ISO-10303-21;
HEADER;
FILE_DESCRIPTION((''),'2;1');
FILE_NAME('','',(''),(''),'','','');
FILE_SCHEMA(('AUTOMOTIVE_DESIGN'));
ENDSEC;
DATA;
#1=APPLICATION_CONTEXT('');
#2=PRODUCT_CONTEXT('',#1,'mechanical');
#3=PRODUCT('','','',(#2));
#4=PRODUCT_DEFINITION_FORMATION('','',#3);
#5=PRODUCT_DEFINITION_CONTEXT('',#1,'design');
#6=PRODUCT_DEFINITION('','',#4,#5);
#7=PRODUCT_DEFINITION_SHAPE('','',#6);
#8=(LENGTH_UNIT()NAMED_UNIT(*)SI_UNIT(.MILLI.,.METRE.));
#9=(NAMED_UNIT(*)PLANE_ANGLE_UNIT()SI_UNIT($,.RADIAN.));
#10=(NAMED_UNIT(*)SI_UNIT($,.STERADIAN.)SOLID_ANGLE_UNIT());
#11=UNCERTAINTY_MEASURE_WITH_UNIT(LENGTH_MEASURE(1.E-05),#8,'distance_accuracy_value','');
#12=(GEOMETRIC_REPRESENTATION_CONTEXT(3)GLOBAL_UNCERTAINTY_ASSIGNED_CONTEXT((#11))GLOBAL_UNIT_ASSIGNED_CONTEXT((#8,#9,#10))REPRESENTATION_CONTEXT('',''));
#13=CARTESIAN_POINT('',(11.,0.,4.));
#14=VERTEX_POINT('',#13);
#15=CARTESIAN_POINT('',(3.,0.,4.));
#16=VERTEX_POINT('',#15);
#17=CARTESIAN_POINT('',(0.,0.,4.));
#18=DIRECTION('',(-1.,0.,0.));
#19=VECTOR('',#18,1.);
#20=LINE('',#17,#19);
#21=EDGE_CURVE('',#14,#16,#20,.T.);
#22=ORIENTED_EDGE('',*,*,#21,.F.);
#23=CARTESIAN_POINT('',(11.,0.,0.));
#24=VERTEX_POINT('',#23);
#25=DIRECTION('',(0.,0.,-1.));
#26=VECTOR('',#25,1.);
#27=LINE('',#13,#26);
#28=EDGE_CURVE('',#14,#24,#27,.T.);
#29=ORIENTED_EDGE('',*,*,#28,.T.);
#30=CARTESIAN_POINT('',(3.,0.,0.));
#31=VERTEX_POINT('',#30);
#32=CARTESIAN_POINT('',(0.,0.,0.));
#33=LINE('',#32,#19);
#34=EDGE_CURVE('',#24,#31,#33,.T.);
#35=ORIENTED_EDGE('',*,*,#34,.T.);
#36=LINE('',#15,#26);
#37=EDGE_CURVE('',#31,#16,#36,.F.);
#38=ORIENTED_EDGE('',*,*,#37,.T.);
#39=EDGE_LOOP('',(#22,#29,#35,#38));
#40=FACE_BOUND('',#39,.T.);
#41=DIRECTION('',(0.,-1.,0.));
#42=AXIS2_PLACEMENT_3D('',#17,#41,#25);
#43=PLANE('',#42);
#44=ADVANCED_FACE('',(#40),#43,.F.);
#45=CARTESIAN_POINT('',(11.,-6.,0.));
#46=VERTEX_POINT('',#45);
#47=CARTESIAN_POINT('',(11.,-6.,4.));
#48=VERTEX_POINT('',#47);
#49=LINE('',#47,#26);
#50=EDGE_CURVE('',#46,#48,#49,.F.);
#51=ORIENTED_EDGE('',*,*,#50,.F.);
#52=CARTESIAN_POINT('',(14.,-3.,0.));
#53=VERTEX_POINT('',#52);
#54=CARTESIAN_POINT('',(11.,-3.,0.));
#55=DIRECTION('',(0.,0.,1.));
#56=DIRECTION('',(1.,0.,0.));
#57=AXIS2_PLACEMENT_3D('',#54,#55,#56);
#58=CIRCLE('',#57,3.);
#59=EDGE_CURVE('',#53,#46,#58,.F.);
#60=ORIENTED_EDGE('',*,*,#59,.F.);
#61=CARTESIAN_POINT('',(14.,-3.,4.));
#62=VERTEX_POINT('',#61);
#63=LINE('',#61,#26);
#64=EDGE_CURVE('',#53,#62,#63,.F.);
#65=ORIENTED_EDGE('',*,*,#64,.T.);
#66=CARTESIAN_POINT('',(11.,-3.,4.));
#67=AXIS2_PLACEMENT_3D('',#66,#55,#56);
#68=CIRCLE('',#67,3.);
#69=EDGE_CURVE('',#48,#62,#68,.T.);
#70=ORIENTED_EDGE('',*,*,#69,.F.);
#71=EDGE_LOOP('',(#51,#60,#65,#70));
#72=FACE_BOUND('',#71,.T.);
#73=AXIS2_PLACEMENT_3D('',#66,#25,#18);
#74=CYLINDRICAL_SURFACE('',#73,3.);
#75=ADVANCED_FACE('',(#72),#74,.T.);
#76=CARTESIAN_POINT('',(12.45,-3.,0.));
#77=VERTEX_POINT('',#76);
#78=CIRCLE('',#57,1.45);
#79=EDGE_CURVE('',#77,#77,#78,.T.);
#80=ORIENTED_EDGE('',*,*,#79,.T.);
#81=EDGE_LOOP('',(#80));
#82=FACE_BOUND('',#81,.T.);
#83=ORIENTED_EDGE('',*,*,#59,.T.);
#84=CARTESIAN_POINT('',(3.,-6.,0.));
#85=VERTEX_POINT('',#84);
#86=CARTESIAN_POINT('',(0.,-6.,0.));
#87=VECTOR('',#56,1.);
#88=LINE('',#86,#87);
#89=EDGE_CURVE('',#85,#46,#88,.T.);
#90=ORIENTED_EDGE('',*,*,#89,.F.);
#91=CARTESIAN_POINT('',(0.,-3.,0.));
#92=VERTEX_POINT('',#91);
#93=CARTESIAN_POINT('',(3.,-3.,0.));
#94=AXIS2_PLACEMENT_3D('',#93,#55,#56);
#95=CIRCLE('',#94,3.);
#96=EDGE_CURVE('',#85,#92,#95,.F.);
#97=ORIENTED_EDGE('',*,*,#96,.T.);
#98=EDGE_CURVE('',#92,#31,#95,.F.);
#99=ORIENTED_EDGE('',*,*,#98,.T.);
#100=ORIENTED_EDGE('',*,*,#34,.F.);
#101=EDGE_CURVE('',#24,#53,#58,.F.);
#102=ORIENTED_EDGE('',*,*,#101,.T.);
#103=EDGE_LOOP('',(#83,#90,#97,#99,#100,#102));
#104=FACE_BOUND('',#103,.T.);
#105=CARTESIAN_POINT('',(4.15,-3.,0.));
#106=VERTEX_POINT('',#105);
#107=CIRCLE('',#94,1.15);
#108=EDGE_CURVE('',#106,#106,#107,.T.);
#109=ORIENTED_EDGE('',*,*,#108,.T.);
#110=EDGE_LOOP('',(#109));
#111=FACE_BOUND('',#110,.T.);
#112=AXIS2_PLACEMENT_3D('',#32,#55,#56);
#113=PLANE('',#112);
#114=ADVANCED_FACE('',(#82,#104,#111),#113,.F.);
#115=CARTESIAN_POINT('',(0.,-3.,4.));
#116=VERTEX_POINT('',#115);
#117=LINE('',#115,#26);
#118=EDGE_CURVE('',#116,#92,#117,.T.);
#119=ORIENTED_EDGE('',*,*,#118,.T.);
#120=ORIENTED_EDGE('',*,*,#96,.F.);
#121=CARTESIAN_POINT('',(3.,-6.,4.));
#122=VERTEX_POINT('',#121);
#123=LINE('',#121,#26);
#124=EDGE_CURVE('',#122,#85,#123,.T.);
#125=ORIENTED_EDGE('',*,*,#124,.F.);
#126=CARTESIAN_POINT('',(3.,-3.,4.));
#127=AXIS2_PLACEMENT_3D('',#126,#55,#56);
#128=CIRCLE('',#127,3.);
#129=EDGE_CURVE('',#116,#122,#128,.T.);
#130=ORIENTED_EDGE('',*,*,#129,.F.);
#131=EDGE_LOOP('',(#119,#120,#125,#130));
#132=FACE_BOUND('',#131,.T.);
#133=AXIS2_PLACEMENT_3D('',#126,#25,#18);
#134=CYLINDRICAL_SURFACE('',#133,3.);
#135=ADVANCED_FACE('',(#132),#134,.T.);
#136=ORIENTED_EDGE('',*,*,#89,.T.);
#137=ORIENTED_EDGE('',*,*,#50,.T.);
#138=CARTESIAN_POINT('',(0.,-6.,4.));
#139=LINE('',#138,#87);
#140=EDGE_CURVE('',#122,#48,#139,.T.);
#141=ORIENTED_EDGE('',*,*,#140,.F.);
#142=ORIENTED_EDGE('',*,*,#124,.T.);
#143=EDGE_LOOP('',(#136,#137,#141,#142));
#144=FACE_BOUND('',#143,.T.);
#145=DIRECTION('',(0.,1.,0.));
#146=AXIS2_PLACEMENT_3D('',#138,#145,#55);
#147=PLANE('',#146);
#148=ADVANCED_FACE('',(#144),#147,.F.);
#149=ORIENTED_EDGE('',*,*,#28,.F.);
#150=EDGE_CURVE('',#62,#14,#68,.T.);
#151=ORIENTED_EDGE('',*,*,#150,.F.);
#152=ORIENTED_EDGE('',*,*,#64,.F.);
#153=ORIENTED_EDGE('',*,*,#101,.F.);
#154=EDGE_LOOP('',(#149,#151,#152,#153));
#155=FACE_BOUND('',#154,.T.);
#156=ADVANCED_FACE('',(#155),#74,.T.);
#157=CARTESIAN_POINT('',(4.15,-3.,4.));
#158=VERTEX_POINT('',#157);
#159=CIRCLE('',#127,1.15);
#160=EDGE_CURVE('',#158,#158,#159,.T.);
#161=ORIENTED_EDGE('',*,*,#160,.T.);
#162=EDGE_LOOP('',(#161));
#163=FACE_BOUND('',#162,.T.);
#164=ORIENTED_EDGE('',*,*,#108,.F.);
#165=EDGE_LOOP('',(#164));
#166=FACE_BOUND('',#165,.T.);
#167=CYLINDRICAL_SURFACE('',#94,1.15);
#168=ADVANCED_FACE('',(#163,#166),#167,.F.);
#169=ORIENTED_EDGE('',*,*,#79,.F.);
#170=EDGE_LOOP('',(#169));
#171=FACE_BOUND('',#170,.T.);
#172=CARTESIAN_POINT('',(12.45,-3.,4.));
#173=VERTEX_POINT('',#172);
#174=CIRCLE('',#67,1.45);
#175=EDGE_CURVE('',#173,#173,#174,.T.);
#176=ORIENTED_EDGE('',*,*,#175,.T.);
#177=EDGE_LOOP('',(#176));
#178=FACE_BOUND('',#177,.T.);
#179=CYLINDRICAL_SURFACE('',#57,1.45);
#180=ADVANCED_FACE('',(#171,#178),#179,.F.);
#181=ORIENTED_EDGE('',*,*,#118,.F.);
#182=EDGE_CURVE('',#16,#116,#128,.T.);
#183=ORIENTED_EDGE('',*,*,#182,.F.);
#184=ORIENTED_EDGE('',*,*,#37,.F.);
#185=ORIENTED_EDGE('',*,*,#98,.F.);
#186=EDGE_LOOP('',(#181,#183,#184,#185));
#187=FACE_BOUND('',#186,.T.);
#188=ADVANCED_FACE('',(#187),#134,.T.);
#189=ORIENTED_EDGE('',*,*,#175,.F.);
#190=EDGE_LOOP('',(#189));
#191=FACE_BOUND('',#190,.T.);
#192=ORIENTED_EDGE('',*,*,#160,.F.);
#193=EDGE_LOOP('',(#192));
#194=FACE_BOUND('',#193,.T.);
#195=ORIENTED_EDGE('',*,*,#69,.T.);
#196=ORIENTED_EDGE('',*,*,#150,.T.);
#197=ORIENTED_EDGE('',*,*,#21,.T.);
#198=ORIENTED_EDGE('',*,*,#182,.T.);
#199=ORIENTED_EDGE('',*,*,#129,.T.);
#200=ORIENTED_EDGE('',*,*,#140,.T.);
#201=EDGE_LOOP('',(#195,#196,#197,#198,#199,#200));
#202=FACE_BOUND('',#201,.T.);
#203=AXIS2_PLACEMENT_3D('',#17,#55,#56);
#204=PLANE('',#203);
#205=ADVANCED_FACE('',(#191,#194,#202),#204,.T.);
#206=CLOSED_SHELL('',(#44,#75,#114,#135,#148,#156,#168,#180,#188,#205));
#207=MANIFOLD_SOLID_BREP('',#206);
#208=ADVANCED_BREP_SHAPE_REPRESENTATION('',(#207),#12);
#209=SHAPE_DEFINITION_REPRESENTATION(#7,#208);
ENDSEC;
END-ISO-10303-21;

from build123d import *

# Parameters (mm, degrees)
SKETCH1_W               = 14
SKETCH1_H               = 6
BOSS_EXTRUDE1_DEPTH     = 4
CUT_EXTRUDE1_DEPTH      = 16.748015748
CUT_EXTRUDE1_DEPTH_BACK = 16.748015748
SKETCH2_R               = 1.15
SKETCH2_R_2             = 1.45
FILLET1_R               = 3


with BuildPart() as part:
    # Sketch1 → Boss-Extrude1 (new body)
    with BuildSketch(Plane.XY):
        with Locations((7, -3)):
            Rectangle(SKETCH1_W, SKETCH1_H)
    extrude(amount=BOSS_EXTRUDE1_DEPTH)

    # Sketch2 → Cut-Extrude1 (cut, two sides: drawn at the far end of the back side and taken through both)
    with BuildSketch(Plane.XY.offset(4).offset(-CUT_EXTRUDE1_DEPTH_BACK)):
        with Locations((3, -3)):
            Circle(SKETCH2_R)
        with Locations((11, -3)):
            Circle(SKETCH2_R_2)
    extrude(amount=CUT_EXTRUDE1_DEPTH + CUT_EXTRUDE1_DEPTH_BACK, mode=Mode.SUBTRACT)

    # Fillet1
    fillet1_edges = [part.edges().sort_by_distance(p)[0] for p in [
        (14, -6, 2),
        (14, 0, 2),
        (0, -6, 2),
        (0, 0, 2),
    ]]
    fillet(fillet1_edges, radius=FILLET1_R - 0.0001)  # a hair under: the kernel refuses the full size


solid = part.part
